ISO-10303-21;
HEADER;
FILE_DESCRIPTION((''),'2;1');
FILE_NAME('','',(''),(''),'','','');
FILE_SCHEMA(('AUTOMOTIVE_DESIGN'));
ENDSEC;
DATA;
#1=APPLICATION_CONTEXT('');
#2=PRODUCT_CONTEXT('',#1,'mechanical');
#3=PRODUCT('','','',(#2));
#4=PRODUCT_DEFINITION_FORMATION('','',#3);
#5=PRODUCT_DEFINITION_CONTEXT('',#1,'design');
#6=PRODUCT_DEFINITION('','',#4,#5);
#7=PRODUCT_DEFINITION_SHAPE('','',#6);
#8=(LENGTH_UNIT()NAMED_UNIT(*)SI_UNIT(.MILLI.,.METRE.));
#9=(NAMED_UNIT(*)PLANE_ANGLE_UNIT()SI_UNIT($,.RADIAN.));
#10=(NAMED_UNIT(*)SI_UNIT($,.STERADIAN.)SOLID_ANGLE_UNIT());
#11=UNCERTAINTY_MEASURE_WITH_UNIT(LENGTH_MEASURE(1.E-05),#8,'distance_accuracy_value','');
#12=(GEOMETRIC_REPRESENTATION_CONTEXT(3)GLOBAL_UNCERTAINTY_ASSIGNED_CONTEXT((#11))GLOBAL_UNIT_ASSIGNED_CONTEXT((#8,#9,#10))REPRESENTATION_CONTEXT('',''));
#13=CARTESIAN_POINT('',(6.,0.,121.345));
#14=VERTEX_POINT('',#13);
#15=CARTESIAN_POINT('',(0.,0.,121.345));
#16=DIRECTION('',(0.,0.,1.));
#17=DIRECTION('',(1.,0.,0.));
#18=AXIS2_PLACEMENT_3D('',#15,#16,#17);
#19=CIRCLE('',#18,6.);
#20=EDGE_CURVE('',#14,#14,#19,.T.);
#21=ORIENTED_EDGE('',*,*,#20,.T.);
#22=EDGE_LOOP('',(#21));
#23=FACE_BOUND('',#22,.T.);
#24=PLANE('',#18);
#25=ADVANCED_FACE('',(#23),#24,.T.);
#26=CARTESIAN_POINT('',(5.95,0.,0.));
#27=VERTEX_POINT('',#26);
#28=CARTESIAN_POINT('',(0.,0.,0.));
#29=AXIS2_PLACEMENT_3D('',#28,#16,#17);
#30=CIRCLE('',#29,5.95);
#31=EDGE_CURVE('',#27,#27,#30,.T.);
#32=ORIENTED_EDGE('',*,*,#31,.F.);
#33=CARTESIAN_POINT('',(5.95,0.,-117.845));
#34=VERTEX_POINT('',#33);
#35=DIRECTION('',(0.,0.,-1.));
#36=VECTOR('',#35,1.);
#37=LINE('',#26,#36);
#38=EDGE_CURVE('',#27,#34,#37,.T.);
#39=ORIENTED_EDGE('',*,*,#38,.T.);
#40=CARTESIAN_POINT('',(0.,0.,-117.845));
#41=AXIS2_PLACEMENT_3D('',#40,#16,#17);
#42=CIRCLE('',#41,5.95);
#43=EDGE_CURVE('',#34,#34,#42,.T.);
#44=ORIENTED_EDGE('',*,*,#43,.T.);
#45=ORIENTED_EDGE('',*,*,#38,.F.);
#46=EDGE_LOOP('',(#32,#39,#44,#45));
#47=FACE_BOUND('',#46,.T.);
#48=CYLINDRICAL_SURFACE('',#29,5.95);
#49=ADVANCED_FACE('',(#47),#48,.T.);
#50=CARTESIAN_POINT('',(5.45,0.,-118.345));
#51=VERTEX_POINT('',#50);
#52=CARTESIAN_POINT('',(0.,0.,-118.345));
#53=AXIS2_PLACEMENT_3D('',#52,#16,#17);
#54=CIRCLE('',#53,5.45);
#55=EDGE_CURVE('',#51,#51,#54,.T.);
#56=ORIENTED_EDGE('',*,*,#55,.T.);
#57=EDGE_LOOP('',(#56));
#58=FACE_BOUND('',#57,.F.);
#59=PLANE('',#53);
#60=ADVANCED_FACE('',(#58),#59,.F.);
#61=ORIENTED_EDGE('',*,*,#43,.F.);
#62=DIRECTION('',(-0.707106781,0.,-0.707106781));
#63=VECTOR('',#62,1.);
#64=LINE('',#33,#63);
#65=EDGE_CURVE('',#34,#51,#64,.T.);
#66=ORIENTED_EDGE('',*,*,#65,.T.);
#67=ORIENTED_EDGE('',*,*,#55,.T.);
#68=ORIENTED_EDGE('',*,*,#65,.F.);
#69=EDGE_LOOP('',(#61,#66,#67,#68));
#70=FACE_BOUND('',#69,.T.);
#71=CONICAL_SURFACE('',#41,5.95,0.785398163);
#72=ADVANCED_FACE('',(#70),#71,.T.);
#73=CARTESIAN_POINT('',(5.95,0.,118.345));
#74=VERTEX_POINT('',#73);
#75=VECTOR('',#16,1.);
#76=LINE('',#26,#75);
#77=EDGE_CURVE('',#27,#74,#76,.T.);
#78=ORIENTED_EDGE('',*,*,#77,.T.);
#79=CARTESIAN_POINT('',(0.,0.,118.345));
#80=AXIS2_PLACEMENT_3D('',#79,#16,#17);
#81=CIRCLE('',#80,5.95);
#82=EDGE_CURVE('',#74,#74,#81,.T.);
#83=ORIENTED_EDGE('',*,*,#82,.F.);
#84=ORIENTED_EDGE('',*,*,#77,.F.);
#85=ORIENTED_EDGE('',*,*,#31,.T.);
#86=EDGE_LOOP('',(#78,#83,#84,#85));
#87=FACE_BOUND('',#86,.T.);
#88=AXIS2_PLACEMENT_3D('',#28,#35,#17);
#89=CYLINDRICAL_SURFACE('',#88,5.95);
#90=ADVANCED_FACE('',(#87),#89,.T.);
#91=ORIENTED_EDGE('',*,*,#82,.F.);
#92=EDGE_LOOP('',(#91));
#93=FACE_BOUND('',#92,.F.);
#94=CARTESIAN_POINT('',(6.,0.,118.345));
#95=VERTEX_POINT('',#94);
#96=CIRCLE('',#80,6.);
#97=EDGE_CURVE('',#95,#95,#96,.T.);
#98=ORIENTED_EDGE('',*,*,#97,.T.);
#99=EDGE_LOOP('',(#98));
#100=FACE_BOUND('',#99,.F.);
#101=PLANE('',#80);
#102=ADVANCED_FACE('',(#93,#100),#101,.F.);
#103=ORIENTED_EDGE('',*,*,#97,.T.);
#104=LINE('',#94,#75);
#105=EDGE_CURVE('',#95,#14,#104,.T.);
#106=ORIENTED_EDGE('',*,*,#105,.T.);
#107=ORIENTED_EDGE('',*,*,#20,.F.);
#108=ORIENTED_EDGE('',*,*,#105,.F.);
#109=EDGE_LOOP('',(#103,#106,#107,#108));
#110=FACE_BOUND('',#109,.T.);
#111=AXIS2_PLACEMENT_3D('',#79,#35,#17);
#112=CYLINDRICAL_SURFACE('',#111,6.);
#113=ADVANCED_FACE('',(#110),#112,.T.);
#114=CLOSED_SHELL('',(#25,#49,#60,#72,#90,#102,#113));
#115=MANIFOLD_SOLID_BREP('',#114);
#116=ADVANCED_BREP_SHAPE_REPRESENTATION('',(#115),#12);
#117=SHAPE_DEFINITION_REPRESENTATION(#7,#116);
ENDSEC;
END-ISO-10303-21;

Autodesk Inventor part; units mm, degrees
ref_plane "YZ Plane" through (0, 0, 0) normal (1, 0, 0) x (0, 1, 0)
ref_plane "XZ Plane" through (0, 0, 0) normal (0, 1, 0) x (-1, 0, 0)
ref_plane "XY Plane" through (0, 0, 0) normal (0, 0, 1) x (1, 0, 0)
sketch "Sketch1" plane through (0, 0, 0) normal (0, 0, 1) x (1, 0, 0)
  circle A0 centre (0, 0) radius 5.95
  dimension "d1" = 11.9
extrude "Extrusion1" add sketch "Sketch1" along normal mid plane 236.69
chamfer "Chamfer3" distance 0.5 angle 45 1 edges at (-5.95, 0, -118.345)
sketch "Sketch4" plane through (0, 0, 118.345) normal (0, 0, 1) x (1, 0, 0)
  circle A0 centre (0, 0) radius 6
extrude "Extrusion5" add sketch "Sketch4" along normal blind 3
properties part number "Plate Support" material "Aluminum 6061"
